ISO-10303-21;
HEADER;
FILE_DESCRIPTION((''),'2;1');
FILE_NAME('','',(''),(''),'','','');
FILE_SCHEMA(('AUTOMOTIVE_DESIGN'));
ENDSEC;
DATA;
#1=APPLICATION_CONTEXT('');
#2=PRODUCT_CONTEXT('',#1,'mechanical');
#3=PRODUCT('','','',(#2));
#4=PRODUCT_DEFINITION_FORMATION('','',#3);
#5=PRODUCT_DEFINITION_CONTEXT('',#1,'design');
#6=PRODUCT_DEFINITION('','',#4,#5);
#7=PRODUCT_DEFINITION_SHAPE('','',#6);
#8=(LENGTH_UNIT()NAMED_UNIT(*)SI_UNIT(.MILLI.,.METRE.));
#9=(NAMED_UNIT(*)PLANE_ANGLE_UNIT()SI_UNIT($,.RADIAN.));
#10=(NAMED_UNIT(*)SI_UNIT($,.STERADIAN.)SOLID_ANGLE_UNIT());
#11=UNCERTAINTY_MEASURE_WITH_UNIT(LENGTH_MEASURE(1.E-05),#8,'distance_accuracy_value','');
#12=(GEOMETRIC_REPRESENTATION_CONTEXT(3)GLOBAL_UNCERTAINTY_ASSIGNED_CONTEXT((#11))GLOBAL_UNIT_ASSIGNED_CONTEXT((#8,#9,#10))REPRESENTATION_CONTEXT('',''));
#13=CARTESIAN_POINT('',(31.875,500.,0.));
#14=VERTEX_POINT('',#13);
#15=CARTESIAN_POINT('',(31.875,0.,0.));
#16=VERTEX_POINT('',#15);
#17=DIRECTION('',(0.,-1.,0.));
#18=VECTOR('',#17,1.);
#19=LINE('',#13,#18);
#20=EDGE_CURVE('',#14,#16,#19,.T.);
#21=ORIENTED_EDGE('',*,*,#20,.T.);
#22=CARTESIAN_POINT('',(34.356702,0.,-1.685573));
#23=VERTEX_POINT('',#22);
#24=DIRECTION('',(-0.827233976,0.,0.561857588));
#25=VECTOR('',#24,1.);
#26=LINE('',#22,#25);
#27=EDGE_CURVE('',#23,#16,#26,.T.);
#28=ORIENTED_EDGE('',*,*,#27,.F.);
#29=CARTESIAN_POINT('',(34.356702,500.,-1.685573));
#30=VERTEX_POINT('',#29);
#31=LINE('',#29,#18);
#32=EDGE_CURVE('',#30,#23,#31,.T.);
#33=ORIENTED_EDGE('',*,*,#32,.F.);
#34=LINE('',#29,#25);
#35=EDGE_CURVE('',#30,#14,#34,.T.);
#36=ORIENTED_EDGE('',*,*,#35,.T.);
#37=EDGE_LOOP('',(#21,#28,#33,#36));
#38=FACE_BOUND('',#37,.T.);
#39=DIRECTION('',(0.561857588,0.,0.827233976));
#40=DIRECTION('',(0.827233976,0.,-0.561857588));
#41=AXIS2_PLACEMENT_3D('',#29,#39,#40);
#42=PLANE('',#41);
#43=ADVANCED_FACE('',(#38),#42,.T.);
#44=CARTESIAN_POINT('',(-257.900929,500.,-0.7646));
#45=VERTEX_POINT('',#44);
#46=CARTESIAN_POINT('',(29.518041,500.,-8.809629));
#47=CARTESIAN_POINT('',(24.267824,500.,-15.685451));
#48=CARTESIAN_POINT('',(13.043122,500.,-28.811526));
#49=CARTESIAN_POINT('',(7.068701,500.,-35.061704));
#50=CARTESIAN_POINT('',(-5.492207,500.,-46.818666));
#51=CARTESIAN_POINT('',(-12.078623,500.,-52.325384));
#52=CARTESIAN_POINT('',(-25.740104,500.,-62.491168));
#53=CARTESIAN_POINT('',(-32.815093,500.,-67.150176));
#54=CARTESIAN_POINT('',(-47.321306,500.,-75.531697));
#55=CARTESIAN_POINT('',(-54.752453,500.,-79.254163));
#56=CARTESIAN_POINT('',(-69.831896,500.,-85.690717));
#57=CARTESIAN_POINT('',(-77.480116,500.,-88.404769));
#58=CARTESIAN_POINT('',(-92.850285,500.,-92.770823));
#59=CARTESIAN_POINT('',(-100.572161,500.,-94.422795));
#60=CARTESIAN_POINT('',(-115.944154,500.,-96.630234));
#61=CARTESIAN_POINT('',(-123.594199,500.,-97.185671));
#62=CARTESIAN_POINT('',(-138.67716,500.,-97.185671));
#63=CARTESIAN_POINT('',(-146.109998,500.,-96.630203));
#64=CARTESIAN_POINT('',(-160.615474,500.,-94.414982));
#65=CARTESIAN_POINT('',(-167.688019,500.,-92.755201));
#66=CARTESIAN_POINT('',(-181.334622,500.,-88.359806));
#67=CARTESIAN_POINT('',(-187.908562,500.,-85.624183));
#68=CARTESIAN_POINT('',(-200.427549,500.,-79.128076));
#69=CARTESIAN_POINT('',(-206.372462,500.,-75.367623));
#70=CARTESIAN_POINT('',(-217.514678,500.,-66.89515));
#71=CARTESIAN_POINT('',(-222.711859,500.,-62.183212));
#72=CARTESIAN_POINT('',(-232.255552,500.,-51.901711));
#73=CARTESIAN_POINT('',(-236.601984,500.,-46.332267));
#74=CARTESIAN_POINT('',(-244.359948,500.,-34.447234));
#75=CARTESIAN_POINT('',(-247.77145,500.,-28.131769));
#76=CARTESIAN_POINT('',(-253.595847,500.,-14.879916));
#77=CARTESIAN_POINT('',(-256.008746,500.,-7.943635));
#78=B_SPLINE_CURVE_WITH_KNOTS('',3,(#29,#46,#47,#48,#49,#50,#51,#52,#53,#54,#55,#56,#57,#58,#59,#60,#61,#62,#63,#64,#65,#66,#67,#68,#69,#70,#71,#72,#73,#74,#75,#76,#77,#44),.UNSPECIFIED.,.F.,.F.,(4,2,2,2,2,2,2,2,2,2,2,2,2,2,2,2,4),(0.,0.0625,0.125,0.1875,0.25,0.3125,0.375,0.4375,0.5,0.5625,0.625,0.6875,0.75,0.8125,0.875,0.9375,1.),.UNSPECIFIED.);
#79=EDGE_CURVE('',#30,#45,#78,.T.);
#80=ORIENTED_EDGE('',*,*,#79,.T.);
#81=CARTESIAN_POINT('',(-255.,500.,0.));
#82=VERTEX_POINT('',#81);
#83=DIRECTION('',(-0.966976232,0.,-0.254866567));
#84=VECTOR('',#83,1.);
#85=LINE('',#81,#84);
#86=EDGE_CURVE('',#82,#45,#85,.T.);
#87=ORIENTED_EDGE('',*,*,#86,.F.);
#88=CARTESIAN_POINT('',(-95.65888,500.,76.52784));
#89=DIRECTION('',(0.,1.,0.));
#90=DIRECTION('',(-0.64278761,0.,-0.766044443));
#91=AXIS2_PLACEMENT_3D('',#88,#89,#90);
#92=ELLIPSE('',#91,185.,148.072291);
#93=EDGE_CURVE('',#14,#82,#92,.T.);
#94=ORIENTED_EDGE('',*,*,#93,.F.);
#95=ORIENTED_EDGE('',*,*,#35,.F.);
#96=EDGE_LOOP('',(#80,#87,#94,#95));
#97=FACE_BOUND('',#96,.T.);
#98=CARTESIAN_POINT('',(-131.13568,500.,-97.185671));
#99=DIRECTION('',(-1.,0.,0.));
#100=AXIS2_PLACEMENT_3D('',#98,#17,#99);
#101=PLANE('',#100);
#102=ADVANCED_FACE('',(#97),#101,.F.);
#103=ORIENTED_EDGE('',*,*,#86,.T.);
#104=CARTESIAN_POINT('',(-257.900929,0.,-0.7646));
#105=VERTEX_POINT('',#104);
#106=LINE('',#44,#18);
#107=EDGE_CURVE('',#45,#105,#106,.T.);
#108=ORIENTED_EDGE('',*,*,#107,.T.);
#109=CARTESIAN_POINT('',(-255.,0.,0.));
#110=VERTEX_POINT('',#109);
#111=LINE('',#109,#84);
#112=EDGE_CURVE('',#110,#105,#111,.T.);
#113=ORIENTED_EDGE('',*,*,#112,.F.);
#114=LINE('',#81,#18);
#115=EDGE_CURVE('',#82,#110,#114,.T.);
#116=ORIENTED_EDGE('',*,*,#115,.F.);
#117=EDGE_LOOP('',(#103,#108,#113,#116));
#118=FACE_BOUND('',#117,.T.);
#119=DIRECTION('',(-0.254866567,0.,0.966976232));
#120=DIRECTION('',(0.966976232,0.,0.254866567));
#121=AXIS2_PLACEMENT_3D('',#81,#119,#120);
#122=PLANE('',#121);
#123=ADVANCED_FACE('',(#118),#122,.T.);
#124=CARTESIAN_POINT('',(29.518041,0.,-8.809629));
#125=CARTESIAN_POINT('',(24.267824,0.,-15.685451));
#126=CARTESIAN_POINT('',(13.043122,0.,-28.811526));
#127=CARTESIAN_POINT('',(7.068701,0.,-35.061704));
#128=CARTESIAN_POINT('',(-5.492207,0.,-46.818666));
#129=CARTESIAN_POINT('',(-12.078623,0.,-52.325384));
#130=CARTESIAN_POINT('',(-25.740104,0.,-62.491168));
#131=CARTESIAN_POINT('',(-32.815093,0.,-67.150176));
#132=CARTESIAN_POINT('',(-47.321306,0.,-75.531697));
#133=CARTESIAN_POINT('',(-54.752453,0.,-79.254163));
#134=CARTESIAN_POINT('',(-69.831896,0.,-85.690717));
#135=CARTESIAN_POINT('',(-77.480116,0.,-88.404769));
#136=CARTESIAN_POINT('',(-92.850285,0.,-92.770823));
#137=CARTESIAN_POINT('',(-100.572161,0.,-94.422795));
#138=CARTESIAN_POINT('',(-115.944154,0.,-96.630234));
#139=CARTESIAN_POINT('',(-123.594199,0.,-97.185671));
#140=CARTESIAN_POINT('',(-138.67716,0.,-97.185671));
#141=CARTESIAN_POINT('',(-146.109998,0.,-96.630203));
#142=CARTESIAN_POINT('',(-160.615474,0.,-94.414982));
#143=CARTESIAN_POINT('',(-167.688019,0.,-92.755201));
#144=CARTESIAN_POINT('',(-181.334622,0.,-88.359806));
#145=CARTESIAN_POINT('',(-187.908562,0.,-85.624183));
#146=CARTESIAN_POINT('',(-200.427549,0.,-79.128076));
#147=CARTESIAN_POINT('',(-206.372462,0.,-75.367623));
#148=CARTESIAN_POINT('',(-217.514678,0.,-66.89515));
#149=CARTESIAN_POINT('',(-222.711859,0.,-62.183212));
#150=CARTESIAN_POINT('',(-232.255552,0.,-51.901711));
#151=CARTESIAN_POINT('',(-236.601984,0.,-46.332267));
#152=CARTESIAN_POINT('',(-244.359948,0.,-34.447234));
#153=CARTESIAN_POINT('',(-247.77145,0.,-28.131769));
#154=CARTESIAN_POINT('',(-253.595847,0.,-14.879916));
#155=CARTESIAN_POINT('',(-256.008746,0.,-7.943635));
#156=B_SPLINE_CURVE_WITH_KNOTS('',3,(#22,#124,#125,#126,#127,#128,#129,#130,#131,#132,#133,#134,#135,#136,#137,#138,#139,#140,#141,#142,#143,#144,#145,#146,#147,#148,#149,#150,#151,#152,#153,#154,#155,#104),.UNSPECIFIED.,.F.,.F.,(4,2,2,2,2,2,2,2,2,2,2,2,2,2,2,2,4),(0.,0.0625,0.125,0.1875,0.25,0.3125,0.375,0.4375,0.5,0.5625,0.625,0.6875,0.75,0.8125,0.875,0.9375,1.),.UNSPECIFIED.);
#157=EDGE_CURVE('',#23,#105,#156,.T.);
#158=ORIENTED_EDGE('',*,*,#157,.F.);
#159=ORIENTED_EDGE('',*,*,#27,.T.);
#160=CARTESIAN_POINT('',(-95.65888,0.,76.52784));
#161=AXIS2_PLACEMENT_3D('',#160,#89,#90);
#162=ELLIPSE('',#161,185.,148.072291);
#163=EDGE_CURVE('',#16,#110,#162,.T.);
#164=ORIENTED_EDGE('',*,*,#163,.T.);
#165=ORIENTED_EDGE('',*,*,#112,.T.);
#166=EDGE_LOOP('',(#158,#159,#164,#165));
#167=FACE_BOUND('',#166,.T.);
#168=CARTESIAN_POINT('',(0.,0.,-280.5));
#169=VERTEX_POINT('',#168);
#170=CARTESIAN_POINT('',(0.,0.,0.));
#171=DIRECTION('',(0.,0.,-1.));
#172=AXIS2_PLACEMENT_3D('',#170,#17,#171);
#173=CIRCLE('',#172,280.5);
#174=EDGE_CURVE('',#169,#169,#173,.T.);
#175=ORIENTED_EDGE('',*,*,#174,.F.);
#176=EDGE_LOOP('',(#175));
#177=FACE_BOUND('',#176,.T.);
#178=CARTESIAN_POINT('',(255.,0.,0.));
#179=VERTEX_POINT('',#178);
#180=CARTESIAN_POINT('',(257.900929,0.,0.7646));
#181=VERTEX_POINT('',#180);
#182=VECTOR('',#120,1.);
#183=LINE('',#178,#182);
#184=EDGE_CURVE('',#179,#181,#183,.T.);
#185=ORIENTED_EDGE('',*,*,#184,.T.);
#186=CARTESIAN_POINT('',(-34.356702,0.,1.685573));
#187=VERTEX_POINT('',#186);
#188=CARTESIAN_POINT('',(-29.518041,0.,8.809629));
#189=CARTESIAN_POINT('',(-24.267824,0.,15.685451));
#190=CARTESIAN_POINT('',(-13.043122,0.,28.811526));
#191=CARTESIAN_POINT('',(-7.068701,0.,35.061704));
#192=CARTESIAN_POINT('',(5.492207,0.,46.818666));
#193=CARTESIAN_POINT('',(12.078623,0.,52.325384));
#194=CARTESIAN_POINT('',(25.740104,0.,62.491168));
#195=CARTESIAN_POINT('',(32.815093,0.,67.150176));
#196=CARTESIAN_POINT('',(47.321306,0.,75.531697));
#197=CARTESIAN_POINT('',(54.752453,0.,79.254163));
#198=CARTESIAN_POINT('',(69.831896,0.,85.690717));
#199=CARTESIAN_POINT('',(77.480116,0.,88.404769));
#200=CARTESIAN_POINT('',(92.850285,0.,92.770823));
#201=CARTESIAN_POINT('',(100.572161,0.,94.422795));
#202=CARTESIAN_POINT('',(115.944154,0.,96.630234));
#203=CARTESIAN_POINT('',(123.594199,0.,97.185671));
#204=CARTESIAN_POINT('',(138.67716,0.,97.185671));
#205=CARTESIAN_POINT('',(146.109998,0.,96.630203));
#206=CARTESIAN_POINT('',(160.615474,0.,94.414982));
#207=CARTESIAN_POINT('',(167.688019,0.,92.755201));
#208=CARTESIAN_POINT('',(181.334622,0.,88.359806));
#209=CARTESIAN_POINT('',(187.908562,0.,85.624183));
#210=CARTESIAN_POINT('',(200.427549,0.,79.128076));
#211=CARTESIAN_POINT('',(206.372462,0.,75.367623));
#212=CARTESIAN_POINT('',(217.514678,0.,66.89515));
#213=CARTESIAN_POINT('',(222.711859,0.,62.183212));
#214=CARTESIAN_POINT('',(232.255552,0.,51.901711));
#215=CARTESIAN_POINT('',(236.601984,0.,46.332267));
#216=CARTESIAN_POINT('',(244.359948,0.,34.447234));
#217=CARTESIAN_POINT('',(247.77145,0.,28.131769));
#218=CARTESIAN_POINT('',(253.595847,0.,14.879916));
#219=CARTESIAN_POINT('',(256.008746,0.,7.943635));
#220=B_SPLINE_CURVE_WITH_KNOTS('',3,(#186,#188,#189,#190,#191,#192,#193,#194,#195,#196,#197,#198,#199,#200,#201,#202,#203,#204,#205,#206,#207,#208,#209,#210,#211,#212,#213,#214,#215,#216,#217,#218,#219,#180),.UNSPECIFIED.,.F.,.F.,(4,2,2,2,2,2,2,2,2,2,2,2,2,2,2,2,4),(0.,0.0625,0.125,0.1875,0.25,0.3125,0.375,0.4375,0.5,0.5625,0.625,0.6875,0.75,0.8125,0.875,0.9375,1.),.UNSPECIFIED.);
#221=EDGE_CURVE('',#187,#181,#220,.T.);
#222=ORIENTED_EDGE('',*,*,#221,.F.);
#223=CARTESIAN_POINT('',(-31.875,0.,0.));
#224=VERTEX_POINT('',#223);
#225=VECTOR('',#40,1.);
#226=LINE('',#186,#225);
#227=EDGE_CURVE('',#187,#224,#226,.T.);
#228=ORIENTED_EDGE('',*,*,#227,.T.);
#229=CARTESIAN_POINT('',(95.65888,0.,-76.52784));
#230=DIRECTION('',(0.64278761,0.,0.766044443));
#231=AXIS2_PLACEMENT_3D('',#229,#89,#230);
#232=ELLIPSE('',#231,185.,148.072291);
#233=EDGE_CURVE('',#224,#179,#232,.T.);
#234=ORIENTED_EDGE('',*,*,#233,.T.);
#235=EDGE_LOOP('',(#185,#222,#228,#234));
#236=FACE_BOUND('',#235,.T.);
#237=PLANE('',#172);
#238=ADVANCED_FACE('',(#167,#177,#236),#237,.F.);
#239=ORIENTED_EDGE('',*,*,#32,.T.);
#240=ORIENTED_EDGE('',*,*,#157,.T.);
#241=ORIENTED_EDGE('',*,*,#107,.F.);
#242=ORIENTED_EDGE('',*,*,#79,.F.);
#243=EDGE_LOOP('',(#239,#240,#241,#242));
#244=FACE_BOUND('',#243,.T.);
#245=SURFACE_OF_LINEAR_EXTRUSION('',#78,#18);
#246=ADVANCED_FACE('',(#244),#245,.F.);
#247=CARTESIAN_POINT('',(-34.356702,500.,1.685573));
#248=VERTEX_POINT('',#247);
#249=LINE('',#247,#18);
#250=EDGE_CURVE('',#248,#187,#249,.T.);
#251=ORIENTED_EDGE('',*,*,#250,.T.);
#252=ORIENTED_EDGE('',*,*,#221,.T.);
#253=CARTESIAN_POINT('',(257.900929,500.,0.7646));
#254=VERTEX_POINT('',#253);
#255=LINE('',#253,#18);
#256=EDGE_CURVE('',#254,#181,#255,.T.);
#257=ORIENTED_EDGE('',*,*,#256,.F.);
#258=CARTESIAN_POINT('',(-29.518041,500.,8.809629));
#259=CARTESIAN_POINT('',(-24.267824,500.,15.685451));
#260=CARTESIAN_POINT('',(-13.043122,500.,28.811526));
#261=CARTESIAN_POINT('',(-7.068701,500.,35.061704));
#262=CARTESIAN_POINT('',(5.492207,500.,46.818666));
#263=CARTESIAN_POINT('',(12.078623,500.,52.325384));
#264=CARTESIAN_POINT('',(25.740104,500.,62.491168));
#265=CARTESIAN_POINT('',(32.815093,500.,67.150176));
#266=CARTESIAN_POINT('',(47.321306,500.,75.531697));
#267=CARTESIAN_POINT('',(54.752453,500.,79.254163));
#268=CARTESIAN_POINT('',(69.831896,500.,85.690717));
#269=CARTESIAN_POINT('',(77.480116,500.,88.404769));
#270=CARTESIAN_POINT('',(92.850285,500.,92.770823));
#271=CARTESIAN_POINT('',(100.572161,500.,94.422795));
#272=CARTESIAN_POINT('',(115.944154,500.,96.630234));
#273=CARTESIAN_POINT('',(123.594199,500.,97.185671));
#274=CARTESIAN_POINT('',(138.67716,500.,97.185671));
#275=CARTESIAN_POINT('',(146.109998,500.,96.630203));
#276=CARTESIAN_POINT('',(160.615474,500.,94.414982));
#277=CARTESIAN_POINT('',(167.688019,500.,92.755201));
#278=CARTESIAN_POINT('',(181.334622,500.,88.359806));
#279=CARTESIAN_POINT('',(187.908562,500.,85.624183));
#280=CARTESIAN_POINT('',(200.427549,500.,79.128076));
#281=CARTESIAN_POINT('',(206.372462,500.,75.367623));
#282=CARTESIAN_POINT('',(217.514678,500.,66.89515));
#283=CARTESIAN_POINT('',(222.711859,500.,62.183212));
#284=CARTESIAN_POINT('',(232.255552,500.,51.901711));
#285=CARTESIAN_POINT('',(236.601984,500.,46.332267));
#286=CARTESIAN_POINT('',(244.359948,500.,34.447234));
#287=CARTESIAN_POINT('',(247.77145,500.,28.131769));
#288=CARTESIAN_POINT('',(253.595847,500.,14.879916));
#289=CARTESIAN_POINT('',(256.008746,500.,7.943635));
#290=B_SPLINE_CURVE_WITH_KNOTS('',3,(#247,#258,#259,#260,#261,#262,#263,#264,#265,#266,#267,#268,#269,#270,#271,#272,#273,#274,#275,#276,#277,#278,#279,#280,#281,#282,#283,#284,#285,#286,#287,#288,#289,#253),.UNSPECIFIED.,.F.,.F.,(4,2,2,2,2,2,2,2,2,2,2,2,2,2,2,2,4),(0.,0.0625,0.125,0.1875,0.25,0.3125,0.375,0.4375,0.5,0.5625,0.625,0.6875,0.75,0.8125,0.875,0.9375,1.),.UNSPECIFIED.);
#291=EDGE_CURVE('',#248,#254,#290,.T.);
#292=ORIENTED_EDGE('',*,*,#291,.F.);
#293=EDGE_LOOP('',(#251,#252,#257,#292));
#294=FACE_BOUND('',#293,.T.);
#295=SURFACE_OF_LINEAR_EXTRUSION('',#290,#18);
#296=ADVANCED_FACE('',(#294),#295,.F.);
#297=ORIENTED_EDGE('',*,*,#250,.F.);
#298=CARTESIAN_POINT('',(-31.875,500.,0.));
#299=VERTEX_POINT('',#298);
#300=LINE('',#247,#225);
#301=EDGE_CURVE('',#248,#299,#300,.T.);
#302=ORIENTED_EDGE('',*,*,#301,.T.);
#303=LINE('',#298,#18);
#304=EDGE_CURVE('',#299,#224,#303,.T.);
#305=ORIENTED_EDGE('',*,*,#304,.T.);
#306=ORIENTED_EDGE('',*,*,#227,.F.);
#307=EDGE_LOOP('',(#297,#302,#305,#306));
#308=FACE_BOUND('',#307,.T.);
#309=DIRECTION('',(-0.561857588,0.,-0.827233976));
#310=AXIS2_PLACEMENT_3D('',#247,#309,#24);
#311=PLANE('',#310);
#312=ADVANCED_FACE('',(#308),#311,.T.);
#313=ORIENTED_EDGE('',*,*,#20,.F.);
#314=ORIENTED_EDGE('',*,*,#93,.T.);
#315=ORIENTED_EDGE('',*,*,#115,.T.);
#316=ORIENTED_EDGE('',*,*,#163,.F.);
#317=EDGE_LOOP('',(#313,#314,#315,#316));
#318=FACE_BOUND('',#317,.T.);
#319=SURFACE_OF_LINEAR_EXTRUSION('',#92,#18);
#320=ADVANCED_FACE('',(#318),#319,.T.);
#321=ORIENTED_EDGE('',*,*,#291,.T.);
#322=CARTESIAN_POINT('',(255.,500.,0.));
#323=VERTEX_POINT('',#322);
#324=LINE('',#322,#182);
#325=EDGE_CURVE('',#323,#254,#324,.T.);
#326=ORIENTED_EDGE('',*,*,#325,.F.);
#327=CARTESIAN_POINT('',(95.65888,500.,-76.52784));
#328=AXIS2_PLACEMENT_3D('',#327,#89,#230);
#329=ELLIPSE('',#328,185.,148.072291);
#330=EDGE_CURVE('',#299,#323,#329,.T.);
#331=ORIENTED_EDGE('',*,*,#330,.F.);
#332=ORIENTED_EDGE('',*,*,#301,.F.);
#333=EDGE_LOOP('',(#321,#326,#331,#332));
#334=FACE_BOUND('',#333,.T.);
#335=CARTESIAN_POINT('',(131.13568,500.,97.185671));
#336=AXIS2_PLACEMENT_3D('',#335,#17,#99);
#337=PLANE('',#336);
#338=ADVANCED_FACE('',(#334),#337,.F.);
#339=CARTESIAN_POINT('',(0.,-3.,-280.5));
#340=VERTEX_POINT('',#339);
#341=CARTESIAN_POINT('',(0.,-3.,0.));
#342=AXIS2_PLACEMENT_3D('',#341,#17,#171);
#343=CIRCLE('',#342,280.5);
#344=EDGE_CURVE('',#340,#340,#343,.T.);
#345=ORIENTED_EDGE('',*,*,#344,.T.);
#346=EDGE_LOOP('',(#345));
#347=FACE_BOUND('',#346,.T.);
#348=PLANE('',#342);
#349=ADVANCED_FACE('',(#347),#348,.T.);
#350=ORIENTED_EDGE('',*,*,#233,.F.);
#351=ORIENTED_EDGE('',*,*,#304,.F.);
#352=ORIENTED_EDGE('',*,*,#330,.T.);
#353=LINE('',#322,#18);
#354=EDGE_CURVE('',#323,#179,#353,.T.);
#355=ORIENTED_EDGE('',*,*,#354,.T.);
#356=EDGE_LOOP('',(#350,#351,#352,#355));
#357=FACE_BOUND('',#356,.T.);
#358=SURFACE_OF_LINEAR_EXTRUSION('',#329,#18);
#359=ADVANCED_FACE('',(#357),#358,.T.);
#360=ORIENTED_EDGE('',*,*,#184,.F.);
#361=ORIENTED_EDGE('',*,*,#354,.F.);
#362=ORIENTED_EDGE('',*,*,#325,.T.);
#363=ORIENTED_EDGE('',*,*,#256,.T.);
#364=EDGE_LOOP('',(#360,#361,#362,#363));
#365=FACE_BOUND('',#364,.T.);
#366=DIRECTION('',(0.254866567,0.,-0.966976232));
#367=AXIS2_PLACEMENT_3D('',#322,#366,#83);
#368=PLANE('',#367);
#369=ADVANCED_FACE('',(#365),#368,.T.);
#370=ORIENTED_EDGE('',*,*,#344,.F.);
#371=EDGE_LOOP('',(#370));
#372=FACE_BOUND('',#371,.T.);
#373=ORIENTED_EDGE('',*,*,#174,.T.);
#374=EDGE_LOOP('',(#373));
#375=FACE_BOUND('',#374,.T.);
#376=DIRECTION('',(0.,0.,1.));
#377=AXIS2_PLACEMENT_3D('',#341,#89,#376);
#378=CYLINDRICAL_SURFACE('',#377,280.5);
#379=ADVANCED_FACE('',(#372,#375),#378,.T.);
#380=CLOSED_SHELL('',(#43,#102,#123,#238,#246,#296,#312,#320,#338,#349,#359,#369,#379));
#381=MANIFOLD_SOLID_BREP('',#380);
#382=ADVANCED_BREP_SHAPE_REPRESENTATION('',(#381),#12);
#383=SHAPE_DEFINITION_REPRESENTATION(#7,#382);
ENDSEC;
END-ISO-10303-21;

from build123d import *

# Parameters (mm, degrees)
EXTRUIR_L_MINA1_DEPTH      = 500
CROQUIS2_R                 = 280.5
SALIENTE_EXTRUIR8_DEPTH    = 3
S_LIDO_MOVER_COPIAR1_ANGLE = 90
S_LIDO_MOVER_COPIAR4_ANGLE = 30
S_LIDO_MOVER_COPIAR5_ANGLE = 60


# Read off the part's stored shape, not the designer's step: Extruir-Lámina1
with BuildPart() as part:
    # Extruir-Lámina1 outline → Extruir-Lámina1 (new body)
    with BuildSketch(Plane(origin=(0, 0, 0), x_dir=(1, 0, 0), z_dir=(0, 1, 0))):
        with BuildLine():
            Line((31.875, 0), (34.356701928, 1.685572764))
            add(Edge.make_bspline(
                [(34.356701928, 1.685572764), (29.518040632, 8.809628945), (24.267823861, 15.685451155), (13.043122074, 28.811525887), (7.068700961, 35.06170371), (-5.492207392, 46.818666019), (-12.078623416, 52.325384088), (-25.740104245, 62.49116755), (-32.815092971, 67.150176271), (-47.321306209, 75.531697275), (-54.752452693, 79.254163139), (-69.831896112, 85.690717355), (-77.480116058, 88.404768596), (-92.850285291, 92.770822658), (-100.572160634, 94.422794798), (-115.944153653, 96.630233569), (-123.594199427, 97.185671477), (-138.67715966, 97.185671477), (-146.109997884, 96.630203371), (-160.615473741, 94.414982201), (-167.688019401, 92.755200875), (-181.334621667, 88.359806412), (-187.908561768, 85.624182586), (-200.427548629, 79.12807609), (-206.372461713, 75.367623458), (-217.514678219, 66.895150195), (-222.711858807, 62.183212028), (-232.255552381, 51.901710647), (-236.60198399, 46.332267049), (-244.359948455, 34.447233779), (-247.771449852, 28.131768977), (-253.595847098, 14.879916022), (-256.008745547, 7.943635207), (-257.900928696, 0.7645997)],
                knots=[0, 0, 0, 0, 0.0625, 0.0625, 0.125, 0.125, 0.1875, 0.1875, 0.25, 0.25, 0.3125, 0.3125, 0.375, 0.375, 0.4375, 0.4375, 0.5, 0.5, 0.5625, 0.5625, 0.625, 0.625, 0.6875, 0.6875, 0.75, 0.75, 0.8125, 0.8125, 0.875, 0.875, 0.9375, 0.9375, 1, 1, 1, 1], degree=3))
            Line((-257.900928696, 0.7645997), (-255, 0))
            add(Edge.make_bspline(
                [(31.875, 0), (-174.798302373, 304.28916746), (-255, 0)],
                knots=[4.585816309, 4.585816309, 4.585816309, 6.797723407, 6.797723407, 6.797723407], degree=2, weights=[1, 0.448282267, 1]))
        make_face()
        with BuildLine():
            Line((-31.875, 0), (-34.356701928, -1.685572764))
            add(Edge.make_bspline(
                [(-34.356701928, -1.685572764), (-29.518040632, -8.809628945), (-24.267823861, -15.685451155), (-13.043122074, -28.811525887), (-7.068700961, -35.06170371), (5.492207392, -46.818666019), (12.078623416, -52.325384088), (25.740104245, -62.49116755), (32.815092971, -67.150176271), (47.321306209, -75.531697275), (54.752452693, -79.254163139), (69.831896112, -85.690717355), (77.480116058, -88.404768596), (92.850285291, -92.770822658), (100.572160634, -94.422794798), (115.944153653, -96.630233569), (123.594199427, -97.185671477), (138.67715966, -97.185671477), (146.109997884, -96.630203371), (160.615473741, -94.414982201), (167.688019401, -92.755200875), (181.334621667, -88.359806412), (187.908561768, -85.624182586), (200.427548629, -79.12807609), (206.372461713, -75.367623458), (217.514678219, -66.895150195), (222.711858807, -62.183212028), (232.255552381, -51.901710647), (236.60198399, -46.332267049), (244.359948455, -34.447233779), (247.771449852, -28.131768977), (253.595847098, -14.879916022), (256.008745547, -7.943635207), (257.900928696, -0.7645997)],
                knots=[0, 0, 0, 0, 0.0625, 0.0625, 0.125, 0.125, 0.1875, 0.1875, 0.25, 0.25, 0.3125, 0.3125, 0.375, 0.375, 0.4375, 0.4375, 0.5, 0.5, 0.5625, 0.5625, 0.625, 0.625, 0.6875, 0.6875, 0.75, 0.75, 0.8125, 0.8125, 0.875, 0.875, 0.9375, 0.9375, 1, 1, 1, 1], degree=3))
            Line((257.900928696, -0.7645997), (255, 0))
            add(Edge.make_bspline(
                [(-31.875, 0), (174.798302373, -304.289167461), (255, 0)],
                knots=[4.585816309, 4.585816309, 4.585816309, 6.797723407, 6.797723407, 6.797723407], degree=2, weights=[1, 0.448282267, 1]))
        make_face()
    extrude(amount=EXTRUIR_L_MINA1_DEPTH)

    # Croquis2 → Saliente-Extruir8 (add)
    with BuildSketch(Plane.XZ):
        with Locations(Location((0, 0, 0), (0, 0, 270))):
            Circle(CROQUIS2_R)
    extrude(amount=SALIENTE_EXTRUIR8_DEPTH)


with BuildPart() as part_1:
    # Sólido-Mover/Copiar1: moved
    add(part.part.rotate(Axis((0, 0, 0), (0, -1, 0)), S_LIDO_MOVER_COPIAR1_ANGLE))


with BuildPart() as part_2:
    # Sólido-Mover/Copiar4: moved
    add(part_1.part.rotate(Axis((0, 0, 0), (0, 1, 0)), S_LIDO_MOVER_COPIAR4_ANGLE))


with BuildPart() as part_3:
    # Sólido-Mover/Copiar5: moved
    add(part_2.part.rotate(Axis((0, 0, 0), (0, 1, 0)), S_LIDO_MOVER_COPIAR5_ANGLE))


solid = part_3.part
